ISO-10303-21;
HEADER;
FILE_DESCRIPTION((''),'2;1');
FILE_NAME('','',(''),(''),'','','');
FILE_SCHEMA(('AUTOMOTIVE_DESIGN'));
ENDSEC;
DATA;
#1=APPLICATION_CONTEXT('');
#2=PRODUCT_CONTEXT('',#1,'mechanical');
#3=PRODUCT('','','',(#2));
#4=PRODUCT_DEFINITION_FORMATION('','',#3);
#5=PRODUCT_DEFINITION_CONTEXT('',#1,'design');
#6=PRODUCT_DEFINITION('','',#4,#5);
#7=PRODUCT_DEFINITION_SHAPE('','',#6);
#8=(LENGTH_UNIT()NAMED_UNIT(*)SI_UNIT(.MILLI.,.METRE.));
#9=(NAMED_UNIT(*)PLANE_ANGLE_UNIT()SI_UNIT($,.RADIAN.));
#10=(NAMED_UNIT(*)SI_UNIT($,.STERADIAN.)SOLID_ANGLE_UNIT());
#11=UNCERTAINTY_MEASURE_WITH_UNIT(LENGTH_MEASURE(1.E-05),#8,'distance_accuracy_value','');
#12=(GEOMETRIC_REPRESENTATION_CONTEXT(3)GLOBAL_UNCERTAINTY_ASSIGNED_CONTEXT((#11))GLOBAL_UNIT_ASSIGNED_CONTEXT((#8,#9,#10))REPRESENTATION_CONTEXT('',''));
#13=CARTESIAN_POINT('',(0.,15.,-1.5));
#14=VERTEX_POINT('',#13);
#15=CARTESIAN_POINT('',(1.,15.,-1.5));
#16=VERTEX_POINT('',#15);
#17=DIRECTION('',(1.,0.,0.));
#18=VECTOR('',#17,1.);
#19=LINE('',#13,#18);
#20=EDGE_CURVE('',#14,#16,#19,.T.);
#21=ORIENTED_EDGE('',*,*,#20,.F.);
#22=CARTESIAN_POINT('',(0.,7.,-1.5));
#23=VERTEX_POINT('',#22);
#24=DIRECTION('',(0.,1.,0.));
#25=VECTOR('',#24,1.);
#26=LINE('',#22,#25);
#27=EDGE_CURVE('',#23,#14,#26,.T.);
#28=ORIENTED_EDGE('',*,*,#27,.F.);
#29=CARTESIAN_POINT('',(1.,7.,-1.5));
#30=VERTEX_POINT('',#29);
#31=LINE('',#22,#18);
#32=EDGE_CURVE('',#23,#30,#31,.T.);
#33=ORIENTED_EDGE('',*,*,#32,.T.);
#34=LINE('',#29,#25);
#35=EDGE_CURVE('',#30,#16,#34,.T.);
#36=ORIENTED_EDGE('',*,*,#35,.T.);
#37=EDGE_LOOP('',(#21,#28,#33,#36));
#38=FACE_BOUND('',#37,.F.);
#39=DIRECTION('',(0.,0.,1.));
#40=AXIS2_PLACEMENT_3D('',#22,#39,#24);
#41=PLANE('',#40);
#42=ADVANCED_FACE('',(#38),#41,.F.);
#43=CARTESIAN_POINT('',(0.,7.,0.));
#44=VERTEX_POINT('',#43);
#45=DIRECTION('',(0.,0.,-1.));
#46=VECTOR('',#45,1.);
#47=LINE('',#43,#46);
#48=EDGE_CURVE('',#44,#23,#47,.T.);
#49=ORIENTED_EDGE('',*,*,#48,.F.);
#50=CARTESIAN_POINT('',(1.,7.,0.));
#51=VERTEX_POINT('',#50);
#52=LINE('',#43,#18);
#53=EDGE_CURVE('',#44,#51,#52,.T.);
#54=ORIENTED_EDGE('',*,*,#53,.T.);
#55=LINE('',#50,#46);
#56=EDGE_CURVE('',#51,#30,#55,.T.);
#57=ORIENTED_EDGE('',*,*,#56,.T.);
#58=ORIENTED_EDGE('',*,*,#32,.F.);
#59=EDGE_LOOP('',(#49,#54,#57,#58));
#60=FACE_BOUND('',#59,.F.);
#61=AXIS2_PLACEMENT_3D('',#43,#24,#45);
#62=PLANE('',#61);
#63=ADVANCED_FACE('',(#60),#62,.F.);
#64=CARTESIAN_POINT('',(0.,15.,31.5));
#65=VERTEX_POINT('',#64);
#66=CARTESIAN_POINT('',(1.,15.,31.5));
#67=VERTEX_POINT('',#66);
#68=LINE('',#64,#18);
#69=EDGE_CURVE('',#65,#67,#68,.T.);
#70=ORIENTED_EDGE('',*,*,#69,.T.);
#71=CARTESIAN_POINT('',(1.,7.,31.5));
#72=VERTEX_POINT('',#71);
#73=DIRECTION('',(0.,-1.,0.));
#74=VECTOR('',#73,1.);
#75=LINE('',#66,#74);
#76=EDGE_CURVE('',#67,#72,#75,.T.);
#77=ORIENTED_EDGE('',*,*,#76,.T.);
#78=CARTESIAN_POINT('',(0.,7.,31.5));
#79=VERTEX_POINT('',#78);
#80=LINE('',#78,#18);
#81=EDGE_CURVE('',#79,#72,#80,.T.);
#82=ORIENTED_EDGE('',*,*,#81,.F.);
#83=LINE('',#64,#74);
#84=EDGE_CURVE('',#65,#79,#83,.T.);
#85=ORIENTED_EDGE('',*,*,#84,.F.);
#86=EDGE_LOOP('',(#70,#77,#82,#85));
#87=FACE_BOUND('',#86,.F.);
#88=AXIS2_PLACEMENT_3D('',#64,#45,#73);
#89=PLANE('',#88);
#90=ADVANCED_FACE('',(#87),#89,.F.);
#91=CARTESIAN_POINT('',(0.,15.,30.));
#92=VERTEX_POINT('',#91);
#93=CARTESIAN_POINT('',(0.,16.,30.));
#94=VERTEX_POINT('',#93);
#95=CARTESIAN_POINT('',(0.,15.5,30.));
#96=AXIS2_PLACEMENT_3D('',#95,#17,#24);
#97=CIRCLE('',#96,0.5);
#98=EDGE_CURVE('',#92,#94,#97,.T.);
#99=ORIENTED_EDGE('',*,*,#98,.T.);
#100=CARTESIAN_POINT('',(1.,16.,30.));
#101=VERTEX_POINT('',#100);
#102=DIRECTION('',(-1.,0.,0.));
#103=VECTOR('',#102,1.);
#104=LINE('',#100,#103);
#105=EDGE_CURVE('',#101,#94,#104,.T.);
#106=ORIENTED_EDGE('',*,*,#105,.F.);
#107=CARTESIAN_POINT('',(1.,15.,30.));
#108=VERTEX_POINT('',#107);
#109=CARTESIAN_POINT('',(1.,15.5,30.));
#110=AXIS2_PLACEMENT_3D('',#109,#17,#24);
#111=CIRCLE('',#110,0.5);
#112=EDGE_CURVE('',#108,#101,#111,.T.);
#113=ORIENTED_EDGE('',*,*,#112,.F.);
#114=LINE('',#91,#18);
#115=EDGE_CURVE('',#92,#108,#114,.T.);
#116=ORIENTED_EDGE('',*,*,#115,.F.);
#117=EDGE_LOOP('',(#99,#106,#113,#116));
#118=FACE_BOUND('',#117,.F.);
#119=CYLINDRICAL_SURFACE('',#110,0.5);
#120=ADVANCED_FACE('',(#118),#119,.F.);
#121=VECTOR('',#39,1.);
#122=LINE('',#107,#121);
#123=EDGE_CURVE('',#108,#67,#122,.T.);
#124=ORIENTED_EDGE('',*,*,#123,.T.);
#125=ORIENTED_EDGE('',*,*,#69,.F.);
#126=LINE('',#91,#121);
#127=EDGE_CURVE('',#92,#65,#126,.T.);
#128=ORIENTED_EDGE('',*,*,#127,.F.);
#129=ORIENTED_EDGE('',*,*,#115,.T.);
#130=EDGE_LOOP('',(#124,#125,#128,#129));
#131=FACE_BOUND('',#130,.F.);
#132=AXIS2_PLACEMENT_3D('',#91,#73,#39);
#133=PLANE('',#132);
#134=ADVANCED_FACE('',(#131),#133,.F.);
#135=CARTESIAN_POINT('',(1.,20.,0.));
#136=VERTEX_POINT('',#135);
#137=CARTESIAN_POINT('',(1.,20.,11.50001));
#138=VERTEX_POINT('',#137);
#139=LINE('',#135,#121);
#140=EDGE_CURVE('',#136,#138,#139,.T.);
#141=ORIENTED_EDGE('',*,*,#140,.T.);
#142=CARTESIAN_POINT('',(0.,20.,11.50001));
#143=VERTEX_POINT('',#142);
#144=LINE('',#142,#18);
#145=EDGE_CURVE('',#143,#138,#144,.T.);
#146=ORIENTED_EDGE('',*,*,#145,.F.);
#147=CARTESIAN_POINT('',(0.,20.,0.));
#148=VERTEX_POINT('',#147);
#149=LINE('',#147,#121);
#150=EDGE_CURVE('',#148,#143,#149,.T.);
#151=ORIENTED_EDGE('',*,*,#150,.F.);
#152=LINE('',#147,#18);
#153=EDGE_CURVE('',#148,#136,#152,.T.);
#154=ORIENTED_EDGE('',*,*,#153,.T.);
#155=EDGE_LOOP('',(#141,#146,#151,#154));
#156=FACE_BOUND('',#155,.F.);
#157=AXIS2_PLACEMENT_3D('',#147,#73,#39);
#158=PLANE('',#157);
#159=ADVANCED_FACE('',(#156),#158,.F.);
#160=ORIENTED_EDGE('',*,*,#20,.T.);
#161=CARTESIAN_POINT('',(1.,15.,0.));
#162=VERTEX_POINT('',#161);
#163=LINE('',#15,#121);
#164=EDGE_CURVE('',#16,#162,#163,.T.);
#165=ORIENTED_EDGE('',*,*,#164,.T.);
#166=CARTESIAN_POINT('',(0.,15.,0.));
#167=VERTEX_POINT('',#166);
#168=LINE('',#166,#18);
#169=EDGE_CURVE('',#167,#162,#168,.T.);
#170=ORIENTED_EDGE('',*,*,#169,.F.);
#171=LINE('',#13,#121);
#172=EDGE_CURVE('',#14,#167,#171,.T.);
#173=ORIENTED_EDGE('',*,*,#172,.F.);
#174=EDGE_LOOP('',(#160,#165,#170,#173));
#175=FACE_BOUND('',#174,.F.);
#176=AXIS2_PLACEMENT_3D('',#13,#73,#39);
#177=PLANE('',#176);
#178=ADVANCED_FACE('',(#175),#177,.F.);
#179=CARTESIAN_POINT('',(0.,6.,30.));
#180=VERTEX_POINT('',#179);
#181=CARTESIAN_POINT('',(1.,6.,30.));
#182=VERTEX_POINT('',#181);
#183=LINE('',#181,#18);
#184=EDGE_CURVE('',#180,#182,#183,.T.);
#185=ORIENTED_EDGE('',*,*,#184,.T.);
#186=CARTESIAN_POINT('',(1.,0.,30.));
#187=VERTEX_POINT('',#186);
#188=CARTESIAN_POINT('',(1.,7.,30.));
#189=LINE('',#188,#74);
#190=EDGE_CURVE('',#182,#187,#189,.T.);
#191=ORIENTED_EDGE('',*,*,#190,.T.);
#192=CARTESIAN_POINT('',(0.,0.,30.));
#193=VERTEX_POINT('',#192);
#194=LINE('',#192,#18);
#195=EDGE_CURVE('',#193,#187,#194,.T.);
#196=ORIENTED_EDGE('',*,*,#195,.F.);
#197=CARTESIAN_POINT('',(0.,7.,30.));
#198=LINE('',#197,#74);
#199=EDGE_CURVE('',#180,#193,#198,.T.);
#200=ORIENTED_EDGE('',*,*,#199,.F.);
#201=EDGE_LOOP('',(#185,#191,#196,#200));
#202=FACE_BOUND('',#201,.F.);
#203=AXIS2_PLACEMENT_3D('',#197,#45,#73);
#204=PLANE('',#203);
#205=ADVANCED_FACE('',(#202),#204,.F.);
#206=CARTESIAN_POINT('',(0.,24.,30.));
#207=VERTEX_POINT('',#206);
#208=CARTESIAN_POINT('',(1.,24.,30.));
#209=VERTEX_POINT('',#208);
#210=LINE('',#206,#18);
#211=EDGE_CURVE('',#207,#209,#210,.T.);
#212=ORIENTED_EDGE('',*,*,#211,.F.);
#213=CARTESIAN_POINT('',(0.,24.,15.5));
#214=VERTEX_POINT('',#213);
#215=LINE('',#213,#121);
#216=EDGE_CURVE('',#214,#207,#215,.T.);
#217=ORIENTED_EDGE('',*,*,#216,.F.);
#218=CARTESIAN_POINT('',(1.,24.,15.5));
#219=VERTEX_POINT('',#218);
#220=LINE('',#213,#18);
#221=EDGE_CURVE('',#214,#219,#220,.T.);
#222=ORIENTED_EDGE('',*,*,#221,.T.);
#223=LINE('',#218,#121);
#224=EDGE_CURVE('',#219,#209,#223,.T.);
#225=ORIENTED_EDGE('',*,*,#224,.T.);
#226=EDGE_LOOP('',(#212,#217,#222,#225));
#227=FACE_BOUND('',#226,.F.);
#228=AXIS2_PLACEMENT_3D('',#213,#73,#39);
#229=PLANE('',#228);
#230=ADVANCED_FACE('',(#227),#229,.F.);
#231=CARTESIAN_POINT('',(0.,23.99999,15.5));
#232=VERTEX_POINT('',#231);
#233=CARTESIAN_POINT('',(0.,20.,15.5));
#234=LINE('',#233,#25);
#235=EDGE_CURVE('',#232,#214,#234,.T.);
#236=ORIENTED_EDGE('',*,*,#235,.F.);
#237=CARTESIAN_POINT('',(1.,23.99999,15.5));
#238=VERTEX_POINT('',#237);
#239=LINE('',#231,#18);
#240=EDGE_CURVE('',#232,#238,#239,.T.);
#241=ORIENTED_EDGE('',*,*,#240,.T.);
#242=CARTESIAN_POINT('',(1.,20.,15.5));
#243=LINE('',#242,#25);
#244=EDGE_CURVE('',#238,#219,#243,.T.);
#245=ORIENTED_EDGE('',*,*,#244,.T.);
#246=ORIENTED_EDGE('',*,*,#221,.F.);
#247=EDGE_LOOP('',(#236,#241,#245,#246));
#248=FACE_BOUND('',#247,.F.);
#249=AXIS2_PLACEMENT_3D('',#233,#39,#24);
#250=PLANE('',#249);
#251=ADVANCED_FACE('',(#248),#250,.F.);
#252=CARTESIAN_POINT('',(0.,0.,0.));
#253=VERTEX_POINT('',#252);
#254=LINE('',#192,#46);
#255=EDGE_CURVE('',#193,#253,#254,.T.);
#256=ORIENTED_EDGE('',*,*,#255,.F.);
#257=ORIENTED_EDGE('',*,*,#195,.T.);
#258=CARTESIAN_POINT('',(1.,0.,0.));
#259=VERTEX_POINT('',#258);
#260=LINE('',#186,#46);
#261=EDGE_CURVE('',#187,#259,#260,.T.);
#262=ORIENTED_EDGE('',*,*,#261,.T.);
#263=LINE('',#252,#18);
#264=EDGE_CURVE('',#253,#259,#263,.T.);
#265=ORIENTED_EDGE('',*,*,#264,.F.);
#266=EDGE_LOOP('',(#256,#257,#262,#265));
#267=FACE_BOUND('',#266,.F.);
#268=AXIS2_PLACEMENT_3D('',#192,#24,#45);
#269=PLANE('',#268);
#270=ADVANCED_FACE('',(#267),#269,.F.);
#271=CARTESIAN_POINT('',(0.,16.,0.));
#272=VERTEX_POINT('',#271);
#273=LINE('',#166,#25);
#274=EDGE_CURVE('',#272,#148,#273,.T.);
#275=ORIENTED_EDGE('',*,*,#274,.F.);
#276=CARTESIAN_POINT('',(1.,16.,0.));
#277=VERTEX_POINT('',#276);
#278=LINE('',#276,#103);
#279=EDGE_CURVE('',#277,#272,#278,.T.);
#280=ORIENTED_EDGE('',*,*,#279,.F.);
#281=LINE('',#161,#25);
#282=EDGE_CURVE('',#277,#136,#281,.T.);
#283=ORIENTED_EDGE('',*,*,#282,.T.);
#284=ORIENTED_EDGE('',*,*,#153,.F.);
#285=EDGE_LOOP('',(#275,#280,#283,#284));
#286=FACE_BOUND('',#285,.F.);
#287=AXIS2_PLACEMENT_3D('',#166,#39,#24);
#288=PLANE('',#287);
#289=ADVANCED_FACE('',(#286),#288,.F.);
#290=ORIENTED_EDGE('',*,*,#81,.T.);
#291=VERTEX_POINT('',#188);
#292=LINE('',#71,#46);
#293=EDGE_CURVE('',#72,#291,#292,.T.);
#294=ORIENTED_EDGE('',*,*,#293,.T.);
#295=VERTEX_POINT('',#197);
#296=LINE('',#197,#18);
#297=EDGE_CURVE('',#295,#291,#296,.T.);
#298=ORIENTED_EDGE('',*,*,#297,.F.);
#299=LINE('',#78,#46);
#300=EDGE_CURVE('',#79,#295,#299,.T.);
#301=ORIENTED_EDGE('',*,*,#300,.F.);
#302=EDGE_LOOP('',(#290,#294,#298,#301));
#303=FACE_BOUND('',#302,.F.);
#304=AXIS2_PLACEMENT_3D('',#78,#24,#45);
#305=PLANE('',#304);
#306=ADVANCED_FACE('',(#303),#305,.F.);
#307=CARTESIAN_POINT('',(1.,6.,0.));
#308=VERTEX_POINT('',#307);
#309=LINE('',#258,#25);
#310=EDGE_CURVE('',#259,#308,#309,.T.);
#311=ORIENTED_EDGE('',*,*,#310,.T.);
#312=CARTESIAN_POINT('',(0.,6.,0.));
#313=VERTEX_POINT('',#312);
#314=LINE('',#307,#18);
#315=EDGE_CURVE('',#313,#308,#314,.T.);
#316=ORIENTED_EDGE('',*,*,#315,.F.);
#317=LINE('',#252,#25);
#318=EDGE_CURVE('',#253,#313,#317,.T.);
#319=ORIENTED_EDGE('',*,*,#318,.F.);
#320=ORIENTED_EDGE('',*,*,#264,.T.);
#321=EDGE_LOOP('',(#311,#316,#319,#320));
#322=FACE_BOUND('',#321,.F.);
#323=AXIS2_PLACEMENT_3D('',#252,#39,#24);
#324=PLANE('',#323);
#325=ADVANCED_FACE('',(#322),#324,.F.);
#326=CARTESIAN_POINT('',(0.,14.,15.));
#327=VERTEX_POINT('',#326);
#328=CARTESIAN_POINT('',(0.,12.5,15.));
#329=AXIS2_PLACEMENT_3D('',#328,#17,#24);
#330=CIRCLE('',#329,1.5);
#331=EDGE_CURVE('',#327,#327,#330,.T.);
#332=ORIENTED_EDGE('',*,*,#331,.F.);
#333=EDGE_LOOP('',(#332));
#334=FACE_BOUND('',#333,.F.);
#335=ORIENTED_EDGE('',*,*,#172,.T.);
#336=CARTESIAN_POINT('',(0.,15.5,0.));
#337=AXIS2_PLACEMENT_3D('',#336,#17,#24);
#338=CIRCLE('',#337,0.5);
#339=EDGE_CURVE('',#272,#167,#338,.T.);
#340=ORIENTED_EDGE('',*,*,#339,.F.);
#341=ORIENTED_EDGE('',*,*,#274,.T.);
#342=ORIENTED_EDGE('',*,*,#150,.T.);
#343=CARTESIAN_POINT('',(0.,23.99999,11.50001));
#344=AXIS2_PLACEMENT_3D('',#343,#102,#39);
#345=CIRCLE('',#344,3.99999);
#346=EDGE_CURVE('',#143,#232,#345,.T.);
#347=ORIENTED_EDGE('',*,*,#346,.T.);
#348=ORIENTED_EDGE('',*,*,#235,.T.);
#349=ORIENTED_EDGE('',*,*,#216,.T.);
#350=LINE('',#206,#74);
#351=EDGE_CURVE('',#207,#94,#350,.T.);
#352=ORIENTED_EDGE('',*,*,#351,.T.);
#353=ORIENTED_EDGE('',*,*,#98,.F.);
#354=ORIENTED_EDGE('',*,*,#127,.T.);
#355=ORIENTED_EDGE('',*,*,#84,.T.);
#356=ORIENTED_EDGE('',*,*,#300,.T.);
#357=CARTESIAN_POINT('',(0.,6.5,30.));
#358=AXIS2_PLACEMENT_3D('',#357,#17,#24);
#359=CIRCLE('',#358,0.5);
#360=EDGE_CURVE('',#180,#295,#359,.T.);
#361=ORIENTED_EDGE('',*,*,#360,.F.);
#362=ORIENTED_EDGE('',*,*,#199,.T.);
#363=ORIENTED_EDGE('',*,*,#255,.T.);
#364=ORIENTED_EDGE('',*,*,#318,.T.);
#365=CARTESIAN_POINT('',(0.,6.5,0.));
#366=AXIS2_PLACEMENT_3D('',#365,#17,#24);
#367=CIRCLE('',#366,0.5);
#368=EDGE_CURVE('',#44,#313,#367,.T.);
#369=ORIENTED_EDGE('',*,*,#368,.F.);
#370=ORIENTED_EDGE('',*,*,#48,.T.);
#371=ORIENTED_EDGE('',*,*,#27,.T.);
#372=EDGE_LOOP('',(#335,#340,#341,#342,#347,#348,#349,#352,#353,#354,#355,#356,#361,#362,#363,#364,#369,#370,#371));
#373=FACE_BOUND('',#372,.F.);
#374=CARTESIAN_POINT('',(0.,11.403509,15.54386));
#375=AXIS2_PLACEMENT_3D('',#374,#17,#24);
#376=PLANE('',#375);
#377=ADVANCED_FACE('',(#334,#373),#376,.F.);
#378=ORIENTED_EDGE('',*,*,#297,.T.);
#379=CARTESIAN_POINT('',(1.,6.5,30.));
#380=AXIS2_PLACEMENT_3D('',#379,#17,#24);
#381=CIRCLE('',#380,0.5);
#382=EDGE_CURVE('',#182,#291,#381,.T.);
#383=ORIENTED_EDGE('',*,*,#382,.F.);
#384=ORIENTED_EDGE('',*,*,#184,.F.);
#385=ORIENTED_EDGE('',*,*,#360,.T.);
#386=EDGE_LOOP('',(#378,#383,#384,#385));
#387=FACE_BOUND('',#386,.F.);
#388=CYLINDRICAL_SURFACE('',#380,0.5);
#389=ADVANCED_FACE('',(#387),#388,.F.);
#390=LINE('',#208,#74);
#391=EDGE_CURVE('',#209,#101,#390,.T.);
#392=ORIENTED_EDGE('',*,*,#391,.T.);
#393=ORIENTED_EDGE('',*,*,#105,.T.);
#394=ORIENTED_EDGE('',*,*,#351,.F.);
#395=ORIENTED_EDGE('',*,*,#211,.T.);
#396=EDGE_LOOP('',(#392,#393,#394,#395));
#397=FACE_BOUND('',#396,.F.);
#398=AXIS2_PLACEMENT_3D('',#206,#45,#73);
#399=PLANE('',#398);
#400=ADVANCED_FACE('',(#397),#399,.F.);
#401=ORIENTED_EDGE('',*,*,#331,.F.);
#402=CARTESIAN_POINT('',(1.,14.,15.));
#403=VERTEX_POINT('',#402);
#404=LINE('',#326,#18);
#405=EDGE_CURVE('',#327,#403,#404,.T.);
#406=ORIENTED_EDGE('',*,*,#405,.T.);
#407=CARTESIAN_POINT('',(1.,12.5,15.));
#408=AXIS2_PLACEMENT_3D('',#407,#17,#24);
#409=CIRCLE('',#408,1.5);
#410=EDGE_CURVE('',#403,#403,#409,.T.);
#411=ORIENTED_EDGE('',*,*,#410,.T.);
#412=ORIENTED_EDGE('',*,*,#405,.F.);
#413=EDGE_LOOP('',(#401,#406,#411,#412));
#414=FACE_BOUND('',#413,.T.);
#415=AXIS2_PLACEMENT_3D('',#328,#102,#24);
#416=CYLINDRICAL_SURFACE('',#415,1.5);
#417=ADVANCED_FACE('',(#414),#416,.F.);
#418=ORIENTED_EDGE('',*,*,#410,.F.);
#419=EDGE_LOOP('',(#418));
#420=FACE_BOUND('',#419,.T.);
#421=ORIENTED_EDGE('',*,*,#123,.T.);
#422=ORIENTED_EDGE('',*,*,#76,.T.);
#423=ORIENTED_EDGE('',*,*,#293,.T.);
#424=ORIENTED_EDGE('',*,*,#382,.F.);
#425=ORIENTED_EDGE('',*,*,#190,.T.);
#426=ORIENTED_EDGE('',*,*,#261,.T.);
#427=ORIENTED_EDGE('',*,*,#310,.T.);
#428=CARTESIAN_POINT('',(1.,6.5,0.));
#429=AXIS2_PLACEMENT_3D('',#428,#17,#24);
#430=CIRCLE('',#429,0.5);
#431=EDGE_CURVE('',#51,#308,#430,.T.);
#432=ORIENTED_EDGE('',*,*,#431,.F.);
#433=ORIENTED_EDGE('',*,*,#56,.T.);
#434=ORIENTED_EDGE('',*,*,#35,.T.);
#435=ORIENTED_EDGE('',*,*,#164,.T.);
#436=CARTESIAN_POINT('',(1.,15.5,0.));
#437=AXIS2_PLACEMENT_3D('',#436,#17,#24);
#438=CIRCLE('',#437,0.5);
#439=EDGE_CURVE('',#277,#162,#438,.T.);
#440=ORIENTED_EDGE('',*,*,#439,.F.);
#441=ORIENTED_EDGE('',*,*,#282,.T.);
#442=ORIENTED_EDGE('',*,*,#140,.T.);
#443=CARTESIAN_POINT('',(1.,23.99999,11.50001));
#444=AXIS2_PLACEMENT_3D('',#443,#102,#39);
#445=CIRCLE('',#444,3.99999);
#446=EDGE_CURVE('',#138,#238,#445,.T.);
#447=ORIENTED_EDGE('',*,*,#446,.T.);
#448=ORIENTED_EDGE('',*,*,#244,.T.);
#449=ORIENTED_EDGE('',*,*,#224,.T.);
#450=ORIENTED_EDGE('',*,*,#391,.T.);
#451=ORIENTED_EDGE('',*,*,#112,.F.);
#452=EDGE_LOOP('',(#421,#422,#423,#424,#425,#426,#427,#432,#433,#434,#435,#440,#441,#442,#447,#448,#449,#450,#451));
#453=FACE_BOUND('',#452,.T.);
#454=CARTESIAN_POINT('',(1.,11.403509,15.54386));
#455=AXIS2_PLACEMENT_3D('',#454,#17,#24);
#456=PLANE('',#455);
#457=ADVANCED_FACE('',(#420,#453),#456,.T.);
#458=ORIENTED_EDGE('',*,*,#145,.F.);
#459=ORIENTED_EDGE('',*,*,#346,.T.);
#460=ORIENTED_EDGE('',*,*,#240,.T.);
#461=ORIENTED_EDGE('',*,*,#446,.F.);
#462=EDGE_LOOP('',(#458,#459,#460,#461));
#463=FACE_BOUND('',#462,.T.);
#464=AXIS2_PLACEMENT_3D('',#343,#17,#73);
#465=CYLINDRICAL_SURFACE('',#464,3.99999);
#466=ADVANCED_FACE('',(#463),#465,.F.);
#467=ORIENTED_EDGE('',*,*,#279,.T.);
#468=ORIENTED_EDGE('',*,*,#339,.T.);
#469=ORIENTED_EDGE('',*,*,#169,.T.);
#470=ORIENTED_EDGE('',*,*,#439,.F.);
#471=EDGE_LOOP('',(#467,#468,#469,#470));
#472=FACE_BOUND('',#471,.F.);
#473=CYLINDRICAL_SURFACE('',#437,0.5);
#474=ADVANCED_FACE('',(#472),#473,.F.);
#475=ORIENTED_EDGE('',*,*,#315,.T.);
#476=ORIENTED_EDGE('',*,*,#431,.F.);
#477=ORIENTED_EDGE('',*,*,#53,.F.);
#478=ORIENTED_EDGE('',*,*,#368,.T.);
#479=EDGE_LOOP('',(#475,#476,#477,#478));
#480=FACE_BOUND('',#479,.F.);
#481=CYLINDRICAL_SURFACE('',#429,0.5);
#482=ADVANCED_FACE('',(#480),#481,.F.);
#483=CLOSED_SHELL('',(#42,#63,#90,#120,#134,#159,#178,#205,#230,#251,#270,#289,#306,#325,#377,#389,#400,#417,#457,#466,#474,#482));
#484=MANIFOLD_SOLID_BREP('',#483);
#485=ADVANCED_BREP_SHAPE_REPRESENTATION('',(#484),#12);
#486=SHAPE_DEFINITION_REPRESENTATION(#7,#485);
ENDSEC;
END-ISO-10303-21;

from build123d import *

# Parameters (mm, degrees)
F0_R     = 1.5
F1_DEPTH = 1
F2_R     = 3.99999
F3_R     = 0.5
F4_DEPTH = 25


# Not quite as in the source:
# - a fillet or chamfer is up to 0.001 mm smaller than in the source, because OpenCascade refuses the exact size


with BuildPart() as f1:
    # F0 (on Right) → F1 (new body)
    with BuildSketch(Plane.YZ):
        Polygon((0, 30), (0, 0), (7, 0), (7, -1.5), (15, -1.5), (15, 0), (20, 0), (20, 15.5), (24, 15.5), (24, 30), (15, 30), (15, 31.5), (7, 31.5), (7, 30), align=None)
        with Locations((12.5, 15)):
            Circle(F0_R, mode=Mode.SUBTRACT)
    extrude(amount=F1_DEPTH)

    # F2 (radius 4 in the source; OpenCascade refuses exactly that, so slightly less here)
    f2_edges = [f1.edges().sort_by_distance(p)[0] for p in [
        (0.5, 20, 15.5),
    ]]
    fillet(f2_edges, radius=F2_R)

    # F3 (on face) → F4 (cut)
    with BuildSketch(Plane.YZ.offset(1)):
        with Locations((6.5, 30)):
            Circle(F3_R)
        with Locations((15.5, 30)):
            Circle(F3_R)
        with Locations((6.5, 0)):
            Circle(F3_R)
        with Locations((15.5, 0)):
            Circle(F3_R)
    extrude(amount=-F4_DEPTH, mode=Mode.SUBTRACT)


solid = f1.part
